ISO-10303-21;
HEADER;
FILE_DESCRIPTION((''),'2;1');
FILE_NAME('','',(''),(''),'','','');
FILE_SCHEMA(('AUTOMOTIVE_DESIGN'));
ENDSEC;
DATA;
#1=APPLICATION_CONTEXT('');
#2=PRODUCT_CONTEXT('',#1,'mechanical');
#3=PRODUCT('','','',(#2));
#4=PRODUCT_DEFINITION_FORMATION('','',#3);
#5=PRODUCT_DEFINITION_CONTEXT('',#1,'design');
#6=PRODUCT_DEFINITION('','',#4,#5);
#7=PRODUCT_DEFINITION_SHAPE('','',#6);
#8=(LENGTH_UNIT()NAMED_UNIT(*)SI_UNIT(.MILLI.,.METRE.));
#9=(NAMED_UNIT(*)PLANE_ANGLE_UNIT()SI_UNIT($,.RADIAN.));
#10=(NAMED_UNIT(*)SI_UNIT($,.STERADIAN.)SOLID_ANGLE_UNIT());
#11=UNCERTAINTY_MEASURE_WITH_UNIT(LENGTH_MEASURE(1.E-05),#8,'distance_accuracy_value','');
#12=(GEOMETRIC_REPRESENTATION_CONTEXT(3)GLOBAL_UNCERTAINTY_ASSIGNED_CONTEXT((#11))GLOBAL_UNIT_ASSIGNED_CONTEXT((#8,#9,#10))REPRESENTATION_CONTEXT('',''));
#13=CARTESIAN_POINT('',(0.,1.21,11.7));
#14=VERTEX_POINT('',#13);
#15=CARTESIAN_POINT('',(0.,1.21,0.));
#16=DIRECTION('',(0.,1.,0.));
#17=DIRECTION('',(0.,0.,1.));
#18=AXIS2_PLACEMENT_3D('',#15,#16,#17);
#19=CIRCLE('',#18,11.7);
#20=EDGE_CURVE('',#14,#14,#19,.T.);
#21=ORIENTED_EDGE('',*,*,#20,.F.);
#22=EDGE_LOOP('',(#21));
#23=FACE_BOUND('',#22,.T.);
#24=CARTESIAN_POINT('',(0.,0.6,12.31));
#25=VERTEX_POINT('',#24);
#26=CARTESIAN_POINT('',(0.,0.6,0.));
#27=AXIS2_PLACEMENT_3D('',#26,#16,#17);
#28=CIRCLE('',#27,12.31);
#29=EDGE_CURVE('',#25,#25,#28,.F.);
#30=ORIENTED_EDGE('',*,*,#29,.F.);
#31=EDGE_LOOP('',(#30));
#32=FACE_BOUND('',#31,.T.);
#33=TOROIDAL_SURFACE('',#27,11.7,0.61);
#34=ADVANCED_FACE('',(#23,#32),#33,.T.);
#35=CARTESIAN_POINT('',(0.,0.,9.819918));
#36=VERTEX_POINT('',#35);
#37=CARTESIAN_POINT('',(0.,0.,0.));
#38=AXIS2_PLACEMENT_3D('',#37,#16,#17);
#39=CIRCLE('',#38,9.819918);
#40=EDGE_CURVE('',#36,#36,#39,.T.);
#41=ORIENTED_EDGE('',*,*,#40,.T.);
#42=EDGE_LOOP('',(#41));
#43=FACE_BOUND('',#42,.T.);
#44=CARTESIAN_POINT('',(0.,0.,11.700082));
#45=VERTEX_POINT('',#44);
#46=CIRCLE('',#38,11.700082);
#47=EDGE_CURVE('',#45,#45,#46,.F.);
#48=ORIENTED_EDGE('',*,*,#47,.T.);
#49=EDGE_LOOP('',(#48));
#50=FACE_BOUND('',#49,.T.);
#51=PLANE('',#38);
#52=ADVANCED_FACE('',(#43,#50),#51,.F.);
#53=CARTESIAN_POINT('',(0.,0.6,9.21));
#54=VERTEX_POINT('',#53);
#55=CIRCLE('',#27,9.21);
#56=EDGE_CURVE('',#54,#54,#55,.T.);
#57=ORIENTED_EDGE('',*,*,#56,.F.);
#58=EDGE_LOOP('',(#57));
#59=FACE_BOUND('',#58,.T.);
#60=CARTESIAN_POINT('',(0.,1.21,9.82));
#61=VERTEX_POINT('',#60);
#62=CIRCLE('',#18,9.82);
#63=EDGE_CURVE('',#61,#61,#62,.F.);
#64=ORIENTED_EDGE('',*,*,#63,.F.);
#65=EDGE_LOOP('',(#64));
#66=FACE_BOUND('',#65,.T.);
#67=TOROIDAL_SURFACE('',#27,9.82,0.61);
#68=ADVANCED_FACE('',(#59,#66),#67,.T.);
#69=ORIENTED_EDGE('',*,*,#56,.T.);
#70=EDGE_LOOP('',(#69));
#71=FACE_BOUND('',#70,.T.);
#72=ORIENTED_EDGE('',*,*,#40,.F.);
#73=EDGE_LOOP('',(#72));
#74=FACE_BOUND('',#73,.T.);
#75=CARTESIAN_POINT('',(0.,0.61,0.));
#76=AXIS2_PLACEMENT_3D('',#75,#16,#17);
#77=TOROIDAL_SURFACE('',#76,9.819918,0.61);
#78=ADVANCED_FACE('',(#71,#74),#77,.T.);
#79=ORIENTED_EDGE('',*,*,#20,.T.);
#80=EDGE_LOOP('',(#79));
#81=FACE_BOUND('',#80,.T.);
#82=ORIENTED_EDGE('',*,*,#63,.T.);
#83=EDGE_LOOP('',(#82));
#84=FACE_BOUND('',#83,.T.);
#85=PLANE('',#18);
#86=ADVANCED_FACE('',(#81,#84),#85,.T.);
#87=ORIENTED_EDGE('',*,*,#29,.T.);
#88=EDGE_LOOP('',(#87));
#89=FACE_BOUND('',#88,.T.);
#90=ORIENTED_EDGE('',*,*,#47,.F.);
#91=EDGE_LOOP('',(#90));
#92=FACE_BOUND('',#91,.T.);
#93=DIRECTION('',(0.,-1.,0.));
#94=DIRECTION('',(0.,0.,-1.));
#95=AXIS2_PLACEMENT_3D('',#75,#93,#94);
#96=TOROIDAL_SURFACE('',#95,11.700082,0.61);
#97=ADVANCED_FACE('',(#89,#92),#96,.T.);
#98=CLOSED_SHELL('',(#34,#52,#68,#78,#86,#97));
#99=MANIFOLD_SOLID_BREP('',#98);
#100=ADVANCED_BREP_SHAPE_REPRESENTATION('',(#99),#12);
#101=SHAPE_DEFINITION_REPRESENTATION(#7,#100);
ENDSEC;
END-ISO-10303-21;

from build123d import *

# Parameters (mm, degrees)
SKETCH1_R               = 12.31
BOSS_EXTRUDE1_DEPTH     = 1.21
RADYUS1_R               = 0.61
RADYUS2_R               = 0.61
CUT_EXTRUDE1_DEPTH      = 1.21
CUT_EXTRUDE1_DEPTH_BACK = 11
SKETCH2_R               = 9.21
RADYUS3_R               = 0.61
RADYUS4_R               = 0.61


with BuildPart() as part:
    # Sketch1 → Boss-Extrude1 (new body)
    with BuildSketch(Plane(origin=(0, 0, 0), x_dir=(1, 0, 0), z_dir=(0, 1, 0))):
        with Locations(Location((0, 0, 0), (0, 0, 90))):
            Circle(SKETCH1_R)
    extrude(amount=BOSS_EXTRUDE1_DEPTH)

    # Radyus1
    radyus1_edges = [part.edges().sort_by_distance(p)[0] for p in [
        (0, 1.21, 12.31),
    ]]
    fillet(radyus1_edges, radius=RADYUS1_R)

    # Radyus2
    # the kernel refuses this fillet: 0.61 mm, written as the material it takes off along each edge
    with BuildSketch(Plane(origin=(0, 0, 0), x_dir=(0, 0, -1), z_dir=(1, 0, 0))) as radyus2_piece_1:
        with BuildLine():
            CenterArc((12.31 - RADYUS2_R, RADYUS2_R), RADYUS2_R, 270, 90)
            Line((12.31 - RADYUS2_R, 0), (12.31, 0))
            Line((12.31, 0), (12.31, RADYUS2_R))
        make_face()
    revolve(axis=Axis((0, 0, 0), (0, 1, 0)), mode=Mode.SUBTRACT)

    # Sketch2 → Cut-Extrude1 (cut, two sides: drawn at the far end of the back side and taken through both)
    with BuildSketch(Plane(origin=(0, 1.21, 0), x_dir=(1, 0, 0), z_dir=(0, 1, 0)).offset(-CUT_EXTRUDE1_DEPTH_BACK)):
        with Locations(Location((0, 0, 0), (0, 0, 270))):
            Circle(SKETCH2_R)
    extrude(amount=CUT_EXTRUDE1_DEPTH + CUT_EXTRUDE1_DEPTH_BACK, mode=Mode.SUBTRACT)

    # Radyus3
    radyus3_edges = [part.edges().sort_by_distance(p)[0] for p in [
        (0, 1.21, -9.21),
    ]]
    fillet(radyus3_edges, radius=RADYUS3_R)

    # Radyus4
    # the kernel refuses this fillet: 0.61 mm, written as the material it takes off along each edge
    with BuildSketch(Plane(origin=(0, 0, 0), x_dir=(0, 0, 1), z_dir=(-1, 0, 0))) as radyus4_piece_1:
        with BuildLine():
            CenterArc((9.21 + RADYUS4_R, RADYUS4_R), RADYUS4_R, 180, 90)
            Line((9.21 + RADYUS4_R, 0), (9.21, 0))
            Line((9.21, 0), (9.21, RADYUS4_R))
        make_face()
    revolve(axis=Axis((0, 0, 0), (0, 1, 0)), mode=Mode.SUBTRACT)


solid = part.part
